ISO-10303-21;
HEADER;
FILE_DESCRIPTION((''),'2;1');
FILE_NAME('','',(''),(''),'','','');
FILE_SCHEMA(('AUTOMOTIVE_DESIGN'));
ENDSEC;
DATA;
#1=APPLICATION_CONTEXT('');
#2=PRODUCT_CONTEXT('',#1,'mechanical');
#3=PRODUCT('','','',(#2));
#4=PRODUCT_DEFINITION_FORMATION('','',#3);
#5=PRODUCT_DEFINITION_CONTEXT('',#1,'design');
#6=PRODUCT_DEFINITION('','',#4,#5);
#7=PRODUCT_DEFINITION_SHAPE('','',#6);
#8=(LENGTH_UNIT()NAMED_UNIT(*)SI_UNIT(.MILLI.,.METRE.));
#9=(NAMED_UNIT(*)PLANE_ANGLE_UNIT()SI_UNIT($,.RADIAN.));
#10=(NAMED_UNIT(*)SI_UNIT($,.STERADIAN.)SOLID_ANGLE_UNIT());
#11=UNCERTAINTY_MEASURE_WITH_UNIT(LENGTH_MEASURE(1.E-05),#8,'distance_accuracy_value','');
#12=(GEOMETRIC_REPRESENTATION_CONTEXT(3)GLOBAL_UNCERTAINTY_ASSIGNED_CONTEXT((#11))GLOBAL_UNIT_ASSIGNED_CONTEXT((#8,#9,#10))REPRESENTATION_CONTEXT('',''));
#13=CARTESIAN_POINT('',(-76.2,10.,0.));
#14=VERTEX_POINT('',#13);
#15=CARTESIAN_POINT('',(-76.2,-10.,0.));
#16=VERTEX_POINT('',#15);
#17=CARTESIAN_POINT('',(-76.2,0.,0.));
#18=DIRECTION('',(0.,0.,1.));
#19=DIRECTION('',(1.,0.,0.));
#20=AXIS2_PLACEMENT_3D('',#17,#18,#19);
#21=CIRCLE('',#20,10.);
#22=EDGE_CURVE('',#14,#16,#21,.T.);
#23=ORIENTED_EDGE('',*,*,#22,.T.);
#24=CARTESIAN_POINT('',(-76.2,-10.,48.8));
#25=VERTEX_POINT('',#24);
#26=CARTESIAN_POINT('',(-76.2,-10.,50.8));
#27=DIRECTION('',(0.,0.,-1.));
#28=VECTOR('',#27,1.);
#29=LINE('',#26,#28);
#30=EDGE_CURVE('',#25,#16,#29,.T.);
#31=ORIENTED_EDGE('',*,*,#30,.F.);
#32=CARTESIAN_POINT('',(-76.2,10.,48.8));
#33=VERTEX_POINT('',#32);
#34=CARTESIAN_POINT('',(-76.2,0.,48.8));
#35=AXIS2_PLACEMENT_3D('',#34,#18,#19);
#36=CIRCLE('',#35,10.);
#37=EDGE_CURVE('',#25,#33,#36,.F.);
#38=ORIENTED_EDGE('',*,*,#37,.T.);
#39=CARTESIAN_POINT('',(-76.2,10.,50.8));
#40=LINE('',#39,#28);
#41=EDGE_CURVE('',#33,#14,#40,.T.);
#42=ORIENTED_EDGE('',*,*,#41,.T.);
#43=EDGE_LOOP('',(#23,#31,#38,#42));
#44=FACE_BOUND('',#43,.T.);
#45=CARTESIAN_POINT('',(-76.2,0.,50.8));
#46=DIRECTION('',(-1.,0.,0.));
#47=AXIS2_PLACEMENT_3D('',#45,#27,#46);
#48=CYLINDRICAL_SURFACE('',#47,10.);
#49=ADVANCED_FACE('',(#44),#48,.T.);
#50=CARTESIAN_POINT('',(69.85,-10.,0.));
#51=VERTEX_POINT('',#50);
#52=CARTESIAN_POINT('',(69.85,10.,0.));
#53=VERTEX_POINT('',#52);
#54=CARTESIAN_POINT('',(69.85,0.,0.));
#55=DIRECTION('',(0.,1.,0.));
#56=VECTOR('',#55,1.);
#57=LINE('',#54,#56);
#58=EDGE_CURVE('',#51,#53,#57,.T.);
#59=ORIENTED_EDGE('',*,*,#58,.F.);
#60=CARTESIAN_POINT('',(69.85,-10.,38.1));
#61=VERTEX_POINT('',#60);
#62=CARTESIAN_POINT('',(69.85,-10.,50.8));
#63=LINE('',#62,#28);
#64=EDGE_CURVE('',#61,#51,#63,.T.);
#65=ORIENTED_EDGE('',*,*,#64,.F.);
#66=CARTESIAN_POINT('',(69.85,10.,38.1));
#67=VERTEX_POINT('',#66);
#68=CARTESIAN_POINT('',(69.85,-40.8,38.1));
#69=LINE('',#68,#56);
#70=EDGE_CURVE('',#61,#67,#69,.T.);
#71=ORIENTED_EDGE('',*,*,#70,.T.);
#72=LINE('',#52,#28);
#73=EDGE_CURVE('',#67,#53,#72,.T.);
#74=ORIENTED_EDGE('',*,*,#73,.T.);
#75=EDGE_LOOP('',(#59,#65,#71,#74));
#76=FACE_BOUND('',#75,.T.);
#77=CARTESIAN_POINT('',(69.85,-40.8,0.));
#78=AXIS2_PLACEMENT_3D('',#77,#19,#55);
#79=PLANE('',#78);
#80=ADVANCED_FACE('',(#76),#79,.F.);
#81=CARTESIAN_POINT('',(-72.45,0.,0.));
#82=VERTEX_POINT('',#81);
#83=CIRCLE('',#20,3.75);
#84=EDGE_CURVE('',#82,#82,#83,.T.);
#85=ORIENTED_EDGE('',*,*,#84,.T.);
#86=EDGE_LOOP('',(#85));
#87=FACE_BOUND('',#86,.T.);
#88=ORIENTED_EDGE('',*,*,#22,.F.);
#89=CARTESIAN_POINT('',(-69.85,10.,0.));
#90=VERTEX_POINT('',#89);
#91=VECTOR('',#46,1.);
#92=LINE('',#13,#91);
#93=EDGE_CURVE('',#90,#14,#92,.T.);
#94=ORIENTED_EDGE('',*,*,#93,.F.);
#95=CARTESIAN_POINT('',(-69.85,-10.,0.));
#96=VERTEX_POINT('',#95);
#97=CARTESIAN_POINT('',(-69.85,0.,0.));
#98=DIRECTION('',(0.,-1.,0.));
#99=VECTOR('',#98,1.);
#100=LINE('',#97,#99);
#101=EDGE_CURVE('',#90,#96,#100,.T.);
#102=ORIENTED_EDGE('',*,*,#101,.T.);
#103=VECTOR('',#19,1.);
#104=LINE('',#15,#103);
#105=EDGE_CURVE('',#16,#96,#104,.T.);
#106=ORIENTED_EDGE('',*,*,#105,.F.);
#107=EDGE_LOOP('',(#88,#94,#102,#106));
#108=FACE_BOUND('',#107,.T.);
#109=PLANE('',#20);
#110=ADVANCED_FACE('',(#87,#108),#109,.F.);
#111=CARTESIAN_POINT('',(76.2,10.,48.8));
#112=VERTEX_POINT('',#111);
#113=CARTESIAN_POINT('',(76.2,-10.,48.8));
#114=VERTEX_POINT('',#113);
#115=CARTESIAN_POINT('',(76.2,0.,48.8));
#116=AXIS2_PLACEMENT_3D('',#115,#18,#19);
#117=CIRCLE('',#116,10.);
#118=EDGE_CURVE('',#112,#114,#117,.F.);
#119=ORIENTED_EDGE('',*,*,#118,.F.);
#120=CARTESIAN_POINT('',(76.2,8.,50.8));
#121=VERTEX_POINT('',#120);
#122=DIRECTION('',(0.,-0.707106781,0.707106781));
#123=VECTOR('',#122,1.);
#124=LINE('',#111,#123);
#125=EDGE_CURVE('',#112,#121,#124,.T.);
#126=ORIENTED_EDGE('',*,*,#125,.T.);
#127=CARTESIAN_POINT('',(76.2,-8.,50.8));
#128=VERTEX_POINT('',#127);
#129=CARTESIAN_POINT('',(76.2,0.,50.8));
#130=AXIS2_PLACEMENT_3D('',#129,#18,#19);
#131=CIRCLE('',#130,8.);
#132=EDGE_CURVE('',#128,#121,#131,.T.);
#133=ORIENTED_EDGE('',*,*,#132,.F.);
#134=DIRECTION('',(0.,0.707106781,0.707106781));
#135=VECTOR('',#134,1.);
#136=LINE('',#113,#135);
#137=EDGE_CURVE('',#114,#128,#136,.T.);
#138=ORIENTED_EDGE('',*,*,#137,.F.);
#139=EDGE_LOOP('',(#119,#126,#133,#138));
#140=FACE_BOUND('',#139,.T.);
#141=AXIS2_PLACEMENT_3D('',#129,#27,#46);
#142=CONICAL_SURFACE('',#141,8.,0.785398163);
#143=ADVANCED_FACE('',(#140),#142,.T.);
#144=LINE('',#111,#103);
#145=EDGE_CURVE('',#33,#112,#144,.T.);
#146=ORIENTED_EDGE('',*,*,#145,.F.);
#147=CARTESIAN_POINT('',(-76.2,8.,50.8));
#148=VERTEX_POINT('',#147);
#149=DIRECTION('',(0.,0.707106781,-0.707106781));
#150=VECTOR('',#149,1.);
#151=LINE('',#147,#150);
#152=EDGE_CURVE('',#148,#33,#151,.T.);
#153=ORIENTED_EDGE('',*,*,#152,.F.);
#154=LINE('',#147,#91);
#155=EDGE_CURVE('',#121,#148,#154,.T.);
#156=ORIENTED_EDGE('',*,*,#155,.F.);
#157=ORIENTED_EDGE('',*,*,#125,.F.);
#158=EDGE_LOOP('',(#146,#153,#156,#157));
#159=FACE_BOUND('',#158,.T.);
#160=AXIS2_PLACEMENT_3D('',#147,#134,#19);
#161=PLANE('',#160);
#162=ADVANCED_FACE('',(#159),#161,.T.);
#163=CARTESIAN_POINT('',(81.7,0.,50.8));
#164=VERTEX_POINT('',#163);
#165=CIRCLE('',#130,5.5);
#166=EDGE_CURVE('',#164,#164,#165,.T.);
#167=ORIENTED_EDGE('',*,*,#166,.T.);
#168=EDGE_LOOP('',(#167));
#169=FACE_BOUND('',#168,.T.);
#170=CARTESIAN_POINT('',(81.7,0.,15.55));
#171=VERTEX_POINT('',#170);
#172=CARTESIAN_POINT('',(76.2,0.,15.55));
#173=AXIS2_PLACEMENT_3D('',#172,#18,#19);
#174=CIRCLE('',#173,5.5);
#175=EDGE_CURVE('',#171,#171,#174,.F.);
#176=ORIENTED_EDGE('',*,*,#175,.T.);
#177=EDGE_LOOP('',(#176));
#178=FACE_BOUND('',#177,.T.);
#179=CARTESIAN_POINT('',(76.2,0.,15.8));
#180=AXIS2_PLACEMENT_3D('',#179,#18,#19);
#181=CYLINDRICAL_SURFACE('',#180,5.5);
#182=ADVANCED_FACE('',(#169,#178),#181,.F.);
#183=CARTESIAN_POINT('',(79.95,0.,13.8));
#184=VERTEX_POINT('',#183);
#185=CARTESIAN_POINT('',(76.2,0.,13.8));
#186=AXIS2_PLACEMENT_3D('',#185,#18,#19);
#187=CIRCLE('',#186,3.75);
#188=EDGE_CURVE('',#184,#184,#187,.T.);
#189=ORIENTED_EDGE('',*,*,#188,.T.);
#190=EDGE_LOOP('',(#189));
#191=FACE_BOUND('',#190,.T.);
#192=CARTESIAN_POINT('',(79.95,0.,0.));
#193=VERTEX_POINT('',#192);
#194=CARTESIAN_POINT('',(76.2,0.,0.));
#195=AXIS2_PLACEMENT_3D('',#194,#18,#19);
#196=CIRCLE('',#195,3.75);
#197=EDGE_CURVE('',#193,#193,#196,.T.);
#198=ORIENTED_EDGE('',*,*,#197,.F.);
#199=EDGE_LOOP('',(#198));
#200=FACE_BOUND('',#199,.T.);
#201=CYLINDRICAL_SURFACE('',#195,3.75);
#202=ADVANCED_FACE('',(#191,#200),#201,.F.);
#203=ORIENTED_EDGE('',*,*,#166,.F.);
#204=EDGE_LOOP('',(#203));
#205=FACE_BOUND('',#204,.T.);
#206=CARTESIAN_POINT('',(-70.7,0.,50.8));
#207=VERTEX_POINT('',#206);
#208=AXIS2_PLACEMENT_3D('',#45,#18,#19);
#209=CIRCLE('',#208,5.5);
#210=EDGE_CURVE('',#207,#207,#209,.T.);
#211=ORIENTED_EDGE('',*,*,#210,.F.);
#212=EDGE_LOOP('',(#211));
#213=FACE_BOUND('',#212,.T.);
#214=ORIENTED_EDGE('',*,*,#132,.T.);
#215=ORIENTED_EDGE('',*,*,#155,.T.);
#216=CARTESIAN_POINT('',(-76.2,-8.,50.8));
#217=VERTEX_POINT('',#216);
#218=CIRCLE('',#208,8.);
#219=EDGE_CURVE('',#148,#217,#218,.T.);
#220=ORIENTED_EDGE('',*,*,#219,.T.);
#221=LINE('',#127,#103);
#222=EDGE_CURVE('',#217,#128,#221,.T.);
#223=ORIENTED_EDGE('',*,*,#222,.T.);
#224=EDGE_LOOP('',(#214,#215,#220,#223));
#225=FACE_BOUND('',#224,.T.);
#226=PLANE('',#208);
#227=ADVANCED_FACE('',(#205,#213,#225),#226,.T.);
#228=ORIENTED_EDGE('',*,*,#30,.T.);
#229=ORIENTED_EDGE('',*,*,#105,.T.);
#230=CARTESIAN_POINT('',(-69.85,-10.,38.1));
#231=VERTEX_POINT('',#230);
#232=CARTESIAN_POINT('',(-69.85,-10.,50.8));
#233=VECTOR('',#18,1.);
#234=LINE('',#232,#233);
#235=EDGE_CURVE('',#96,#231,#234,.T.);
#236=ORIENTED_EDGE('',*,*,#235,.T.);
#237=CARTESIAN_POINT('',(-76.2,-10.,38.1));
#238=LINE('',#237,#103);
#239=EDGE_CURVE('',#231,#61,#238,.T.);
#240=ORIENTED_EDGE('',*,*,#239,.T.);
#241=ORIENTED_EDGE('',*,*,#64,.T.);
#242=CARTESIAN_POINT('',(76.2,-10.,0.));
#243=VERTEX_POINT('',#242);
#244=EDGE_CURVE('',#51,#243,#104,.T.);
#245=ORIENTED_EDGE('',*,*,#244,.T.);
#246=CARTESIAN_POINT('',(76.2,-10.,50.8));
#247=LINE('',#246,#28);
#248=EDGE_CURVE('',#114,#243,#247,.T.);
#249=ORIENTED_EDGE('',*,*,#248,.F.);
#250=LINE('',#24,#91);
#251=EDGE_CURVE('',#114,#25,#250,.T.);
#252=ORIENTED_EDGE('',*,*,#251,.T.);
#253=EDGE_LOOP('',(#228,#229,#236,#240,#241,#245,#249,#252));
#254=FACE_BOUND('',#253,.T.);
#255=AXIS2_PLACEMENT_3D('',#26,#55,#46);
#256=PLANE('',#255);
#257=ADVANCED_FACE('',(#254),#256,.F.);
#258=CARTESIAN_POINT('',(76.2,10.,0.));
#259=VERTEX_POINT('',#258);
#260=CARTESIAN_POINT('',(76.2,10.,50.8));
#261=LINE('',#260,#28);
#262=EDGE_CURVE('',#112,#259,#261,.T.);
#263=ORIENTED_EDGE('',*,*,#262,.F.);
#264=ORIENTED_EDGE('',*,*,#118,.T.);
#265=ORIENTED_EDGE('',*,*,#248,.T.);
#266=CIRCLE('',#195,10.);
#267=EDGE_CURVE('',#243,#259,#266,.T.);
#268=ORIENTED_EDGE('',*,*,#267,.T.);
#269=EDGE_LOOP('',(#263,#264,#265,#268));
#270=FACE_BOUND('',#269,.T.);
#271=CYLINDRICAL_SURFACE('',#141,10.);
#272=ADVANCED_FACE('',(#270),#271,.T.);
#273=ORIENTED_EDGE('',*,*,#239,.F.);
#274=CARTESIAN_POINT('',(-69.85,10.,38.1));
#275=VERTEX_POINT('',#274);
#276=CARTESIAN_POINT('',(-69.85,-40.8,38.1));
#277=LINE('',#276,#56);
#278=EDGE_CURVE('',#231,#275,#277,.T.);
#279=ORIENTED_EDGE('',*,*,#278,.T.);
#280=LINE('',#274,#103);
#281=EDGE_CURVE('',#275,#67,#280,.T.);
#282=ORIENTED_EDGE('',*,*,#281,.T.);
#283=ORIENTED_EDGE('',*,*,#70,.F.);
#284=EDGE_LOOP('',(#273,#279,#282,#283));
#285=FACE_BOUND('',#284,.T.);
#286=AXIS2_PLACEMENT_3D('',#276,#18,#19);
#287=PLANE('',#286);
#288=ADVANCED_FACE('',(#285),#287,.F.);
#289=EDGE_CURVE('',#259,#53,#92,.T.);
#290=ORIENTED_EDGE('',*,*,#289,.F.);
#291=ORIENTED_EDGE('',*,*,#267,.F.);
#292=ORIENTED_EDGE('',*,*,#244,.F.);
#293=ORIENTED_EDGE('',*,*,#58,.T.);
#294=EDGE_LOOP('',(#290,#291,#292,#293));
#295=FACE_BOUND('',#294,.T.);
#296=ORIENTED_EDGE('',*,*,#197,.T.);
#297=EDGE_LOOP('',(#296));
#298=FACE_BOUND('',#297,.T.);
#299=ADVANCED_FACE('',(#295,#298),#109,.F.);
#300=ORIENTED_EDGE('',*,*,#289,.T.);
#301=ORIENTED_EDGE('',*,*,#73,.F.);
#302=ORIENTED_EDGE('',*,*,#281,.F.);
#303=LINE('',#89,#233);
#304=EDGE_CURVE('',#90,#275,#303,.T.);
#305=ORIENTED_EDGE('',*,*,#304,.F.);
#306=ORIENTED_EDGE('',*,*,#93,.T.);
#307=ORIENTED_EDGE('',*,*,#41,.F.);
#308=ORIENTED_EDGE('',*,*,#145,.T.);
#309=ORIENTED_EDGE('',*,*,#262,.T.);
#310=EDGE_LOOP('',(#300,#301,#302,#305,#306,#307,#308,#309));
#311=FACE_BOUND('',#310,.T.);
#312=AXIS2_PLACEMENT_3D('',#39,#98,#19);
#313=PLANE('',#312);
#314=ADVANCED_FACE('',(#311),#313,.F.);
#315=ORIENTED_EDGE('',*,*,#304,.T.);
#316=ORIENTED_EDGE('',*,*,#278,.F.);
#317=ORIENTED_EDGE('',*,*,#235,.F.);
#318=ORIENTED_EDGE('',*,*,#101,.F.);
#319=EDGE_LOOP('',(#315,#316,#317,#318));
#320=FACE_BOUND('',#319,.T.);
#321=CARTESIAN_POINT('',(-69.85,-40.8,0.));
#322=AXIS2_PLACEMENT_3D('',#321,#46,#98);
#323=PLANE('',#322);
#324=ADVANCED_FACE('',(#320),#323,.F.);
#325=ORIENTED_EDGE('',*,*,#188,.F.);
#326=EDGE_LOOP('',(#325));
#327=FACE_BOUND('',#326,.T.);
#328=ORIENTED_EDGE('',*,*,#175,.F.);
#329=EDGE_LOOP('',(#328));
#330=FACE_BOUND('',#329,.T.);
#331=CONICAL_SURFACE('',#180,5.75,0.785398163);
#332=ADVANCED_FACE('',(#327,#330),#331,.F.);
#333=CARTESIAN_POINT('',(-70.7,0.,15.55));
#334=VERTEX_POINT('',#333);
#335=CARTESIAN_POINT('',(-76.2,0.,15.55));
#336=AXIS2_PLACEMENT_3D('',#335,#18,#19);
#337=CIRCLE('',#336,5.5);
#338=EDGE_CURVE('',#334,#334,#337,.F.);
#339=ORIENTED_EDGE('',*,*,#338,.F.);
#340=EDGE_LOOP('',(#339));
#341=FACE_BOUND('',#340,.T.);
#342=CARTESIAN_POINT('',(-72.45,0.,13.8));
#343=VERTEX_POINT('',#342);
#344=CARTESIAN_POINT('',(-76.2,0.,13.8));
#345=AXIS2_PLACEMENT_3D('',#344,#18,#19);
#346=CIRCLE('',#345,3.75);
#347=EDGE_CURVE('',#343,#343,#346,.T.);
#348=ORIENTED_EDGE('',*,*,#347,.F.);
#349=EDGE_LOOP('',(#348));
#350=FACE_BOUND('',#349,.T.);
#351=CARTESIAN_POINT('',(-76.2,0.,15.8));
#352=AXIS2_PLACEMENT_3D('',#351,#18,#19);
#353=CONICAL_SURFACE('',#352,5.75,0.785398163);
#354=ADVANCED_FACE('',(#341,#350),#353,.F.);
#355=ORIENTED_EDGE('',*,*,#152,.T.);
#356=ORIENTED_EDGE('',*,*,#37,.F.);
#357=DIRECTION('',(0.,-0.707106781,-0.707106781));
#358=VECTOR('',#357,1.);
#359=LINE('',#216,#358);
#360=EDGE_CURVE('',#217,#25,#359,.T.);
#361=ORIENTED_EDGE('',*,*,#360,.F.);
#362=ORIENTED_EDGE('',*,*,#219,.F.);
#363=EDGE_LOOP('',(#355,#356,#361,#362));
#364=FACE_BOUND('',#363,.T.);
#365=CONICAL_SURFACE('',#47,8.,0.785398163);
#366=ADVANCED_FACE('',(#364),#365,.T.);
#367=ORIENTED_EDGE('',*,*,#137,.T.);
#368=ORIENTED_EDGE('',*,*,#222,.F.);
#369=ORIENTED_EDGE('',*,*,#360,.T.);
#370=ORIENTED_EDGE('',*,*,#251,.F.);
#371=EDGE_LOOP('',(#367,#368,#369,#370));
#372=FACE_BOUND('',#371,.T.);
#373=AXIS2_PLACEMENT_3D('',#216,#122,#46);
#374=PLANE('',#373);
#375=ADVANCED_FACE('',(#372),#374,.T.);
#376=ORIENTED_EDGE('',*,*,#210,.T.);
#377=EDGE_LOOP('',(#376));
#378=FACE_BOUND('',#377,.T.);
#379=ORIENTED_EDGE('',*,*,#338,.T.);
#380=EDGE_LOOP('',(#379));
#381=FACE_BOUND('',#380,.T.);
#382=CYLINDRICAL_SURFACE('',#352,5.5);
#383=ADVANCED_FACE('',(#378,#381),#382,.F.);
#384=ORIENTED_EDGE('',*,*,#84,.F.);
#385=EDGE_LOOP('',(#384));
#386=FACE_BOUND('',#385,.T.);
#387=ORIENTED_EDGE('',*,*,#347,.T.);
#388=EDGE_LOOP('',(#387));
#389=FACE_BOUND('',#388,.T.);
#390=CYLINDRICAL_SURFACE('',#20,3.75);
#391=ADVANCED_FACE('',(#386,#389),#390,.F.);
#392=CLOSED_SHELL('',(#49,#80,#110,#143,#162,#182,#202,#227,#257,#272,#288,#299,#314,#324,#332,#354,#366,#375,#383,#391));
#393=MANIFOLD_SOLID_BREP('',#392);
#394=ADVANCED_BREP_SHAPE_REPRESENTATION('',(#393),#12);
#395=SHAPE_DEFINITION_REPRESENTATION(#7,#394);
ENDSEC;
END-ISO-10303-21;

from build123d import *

# Parameters (mm, degrees)
BOSS_EXTRUDE1_DEPTH = 50.8
SKETCH2_R           = 3.75
CUT_EXTRUDE1_DEPTH  = 50.8
SKETCH3_W           = 139.7
SKETCH3_H           = 38.1
CUT_EXTRUDE2_DEPTH  = 50.8
SKETCH4_R           = 5.5
CUT_EXTRUDE3_DEPTH  = 35
CHAMFER1_SIZE       = 2
CHAMFER2_SIZE       = 2


with BuildPart() as part:
    # Sketch1 → Boss-Extrude1 (new body)
    with BuildSketch(Plane.XY):
        with BuildLine():
            Line((-76.2, 10), (76.2, 10))
            ThreePointArc((76.2, 10), (86.2, 0), (76.2, -10))
            Line((76.2, -10), (-76.2, -10))
            ThreePointArc((-76.2, -10), (-86.2, 0), (-76.2, 10))
        make_face()
    extrude(amount=BOSS_EXTRUDE1_DEPTH)

    # Sketch2 → Cut-Extrude1 (cut)
    with BuildSketch(Plane.XY.offset(50.8)):
        with Locations((-76.2, 0)):
            Circle(SKETCH2_R)
        with Locations((76.2, 0)):
            Circle(SKETCH2_R)
    extrude(amount=-CUT_EXTRUDE1_DEPTH, mode=Mode.SUBTRACT)

    # Sketch3 → Cut-Extrude2 (cut)
    with BuildSketch(Plane(origin=(0, 10, 0), x_dir=(1, 0, 0), z_dir=(0, 1, 0))):
        with Locations((0, -19.05)):
            Rectangle(SKETCH3_W, SKETCH3_H)
    extrude(amount=-CUT_EXTRUDE2_DEPTH, mode=Mode.SUBTRACT)

    # Sketch4 → Cut-Extrude3 (cut)
    with BuildSketch(Plane.XY.offset(50.8)):
        with Locations((-76.2, 0)):
            Circle(SKETCH4_R)
        with Locations((76.2, 0)):
            Circle(SKETCH4_R)
    extrude(amount=-CUT_EXTRUDE3_DEPTH, mode=Mode.SUBTRACT)

    # Chamfer1
    chamfer1_edges = [part.edges().sort_by_distance(p)[0] for p in [
        (86.2, 0, 50.8),
        (0, 10, 50.8),
        (-86.2, 0, 50.8),
        (0, -10, 50.8),
    ]]
    chamfer(chamfer1_edges, length=CHAMFER1_SIZE)

    # Chamfer2
    # the kernel refuses this chamfer: 2 mm, written as the material it takes off along each edge
    with BuildSketch(Plane(origin=(76.2, 0, 15.8), x_dir=(1, 0, 0), z_dir=(0, -1, 0))) as chamfer2_piece_1_section:
        Polygon((3.75, -CHAMFER2_SIZE), (3.75 + CHAMFER2_SIZE, 0), (3.75, 0), align=None)
    chamfer2_piece_1 = revolve(axis=Axis((76.2, 0, 15.8), (0, 0, 1)), mode=Mode.PRIVATE)
    chamfer2_piece_1 = chamfer2_piece_1 & Plane(origin=(76.2, 0, 14.674245927), x_dir=(1, 0, 0), z_dir=(0, 0, 1)) * Cylinder(5.5, 23, mode=Mode.PRIVATE)
    add(chamfer2_piece_1, mode=Mode.SUBTRACT)
    with BuildSketch(Plane(origin=(-76.2, 0, 15.8), x_dir=(1, 0, 0), z_dir=(0, -1, 0))) as chamfer2_piece_2_section:
        Polygon((3.75, -CHAMFER2_SIZE), (3.75 + CHAMFER2_SIZE, 0), (3.75, 0), align=None)
    chamfer2_piece_2 = revolve(axis=Axis((-76.2, 0, 15.8), (0, 0, 1)), mode=Mode.PRIVATE)
    chamfer2_piece_2 = chamfer2_piece_2 & Plane(origin=(-76.2, 0, 14.674245927), x_dir=(1, 0, 0), z_dir=(0, 0, 1)) * Cylinder(5.5, 23, mode=Mode.PRIVATE)
    add(chamfer2_piece_2, mode=Mode.SUBTRACT)


solid = part.part
